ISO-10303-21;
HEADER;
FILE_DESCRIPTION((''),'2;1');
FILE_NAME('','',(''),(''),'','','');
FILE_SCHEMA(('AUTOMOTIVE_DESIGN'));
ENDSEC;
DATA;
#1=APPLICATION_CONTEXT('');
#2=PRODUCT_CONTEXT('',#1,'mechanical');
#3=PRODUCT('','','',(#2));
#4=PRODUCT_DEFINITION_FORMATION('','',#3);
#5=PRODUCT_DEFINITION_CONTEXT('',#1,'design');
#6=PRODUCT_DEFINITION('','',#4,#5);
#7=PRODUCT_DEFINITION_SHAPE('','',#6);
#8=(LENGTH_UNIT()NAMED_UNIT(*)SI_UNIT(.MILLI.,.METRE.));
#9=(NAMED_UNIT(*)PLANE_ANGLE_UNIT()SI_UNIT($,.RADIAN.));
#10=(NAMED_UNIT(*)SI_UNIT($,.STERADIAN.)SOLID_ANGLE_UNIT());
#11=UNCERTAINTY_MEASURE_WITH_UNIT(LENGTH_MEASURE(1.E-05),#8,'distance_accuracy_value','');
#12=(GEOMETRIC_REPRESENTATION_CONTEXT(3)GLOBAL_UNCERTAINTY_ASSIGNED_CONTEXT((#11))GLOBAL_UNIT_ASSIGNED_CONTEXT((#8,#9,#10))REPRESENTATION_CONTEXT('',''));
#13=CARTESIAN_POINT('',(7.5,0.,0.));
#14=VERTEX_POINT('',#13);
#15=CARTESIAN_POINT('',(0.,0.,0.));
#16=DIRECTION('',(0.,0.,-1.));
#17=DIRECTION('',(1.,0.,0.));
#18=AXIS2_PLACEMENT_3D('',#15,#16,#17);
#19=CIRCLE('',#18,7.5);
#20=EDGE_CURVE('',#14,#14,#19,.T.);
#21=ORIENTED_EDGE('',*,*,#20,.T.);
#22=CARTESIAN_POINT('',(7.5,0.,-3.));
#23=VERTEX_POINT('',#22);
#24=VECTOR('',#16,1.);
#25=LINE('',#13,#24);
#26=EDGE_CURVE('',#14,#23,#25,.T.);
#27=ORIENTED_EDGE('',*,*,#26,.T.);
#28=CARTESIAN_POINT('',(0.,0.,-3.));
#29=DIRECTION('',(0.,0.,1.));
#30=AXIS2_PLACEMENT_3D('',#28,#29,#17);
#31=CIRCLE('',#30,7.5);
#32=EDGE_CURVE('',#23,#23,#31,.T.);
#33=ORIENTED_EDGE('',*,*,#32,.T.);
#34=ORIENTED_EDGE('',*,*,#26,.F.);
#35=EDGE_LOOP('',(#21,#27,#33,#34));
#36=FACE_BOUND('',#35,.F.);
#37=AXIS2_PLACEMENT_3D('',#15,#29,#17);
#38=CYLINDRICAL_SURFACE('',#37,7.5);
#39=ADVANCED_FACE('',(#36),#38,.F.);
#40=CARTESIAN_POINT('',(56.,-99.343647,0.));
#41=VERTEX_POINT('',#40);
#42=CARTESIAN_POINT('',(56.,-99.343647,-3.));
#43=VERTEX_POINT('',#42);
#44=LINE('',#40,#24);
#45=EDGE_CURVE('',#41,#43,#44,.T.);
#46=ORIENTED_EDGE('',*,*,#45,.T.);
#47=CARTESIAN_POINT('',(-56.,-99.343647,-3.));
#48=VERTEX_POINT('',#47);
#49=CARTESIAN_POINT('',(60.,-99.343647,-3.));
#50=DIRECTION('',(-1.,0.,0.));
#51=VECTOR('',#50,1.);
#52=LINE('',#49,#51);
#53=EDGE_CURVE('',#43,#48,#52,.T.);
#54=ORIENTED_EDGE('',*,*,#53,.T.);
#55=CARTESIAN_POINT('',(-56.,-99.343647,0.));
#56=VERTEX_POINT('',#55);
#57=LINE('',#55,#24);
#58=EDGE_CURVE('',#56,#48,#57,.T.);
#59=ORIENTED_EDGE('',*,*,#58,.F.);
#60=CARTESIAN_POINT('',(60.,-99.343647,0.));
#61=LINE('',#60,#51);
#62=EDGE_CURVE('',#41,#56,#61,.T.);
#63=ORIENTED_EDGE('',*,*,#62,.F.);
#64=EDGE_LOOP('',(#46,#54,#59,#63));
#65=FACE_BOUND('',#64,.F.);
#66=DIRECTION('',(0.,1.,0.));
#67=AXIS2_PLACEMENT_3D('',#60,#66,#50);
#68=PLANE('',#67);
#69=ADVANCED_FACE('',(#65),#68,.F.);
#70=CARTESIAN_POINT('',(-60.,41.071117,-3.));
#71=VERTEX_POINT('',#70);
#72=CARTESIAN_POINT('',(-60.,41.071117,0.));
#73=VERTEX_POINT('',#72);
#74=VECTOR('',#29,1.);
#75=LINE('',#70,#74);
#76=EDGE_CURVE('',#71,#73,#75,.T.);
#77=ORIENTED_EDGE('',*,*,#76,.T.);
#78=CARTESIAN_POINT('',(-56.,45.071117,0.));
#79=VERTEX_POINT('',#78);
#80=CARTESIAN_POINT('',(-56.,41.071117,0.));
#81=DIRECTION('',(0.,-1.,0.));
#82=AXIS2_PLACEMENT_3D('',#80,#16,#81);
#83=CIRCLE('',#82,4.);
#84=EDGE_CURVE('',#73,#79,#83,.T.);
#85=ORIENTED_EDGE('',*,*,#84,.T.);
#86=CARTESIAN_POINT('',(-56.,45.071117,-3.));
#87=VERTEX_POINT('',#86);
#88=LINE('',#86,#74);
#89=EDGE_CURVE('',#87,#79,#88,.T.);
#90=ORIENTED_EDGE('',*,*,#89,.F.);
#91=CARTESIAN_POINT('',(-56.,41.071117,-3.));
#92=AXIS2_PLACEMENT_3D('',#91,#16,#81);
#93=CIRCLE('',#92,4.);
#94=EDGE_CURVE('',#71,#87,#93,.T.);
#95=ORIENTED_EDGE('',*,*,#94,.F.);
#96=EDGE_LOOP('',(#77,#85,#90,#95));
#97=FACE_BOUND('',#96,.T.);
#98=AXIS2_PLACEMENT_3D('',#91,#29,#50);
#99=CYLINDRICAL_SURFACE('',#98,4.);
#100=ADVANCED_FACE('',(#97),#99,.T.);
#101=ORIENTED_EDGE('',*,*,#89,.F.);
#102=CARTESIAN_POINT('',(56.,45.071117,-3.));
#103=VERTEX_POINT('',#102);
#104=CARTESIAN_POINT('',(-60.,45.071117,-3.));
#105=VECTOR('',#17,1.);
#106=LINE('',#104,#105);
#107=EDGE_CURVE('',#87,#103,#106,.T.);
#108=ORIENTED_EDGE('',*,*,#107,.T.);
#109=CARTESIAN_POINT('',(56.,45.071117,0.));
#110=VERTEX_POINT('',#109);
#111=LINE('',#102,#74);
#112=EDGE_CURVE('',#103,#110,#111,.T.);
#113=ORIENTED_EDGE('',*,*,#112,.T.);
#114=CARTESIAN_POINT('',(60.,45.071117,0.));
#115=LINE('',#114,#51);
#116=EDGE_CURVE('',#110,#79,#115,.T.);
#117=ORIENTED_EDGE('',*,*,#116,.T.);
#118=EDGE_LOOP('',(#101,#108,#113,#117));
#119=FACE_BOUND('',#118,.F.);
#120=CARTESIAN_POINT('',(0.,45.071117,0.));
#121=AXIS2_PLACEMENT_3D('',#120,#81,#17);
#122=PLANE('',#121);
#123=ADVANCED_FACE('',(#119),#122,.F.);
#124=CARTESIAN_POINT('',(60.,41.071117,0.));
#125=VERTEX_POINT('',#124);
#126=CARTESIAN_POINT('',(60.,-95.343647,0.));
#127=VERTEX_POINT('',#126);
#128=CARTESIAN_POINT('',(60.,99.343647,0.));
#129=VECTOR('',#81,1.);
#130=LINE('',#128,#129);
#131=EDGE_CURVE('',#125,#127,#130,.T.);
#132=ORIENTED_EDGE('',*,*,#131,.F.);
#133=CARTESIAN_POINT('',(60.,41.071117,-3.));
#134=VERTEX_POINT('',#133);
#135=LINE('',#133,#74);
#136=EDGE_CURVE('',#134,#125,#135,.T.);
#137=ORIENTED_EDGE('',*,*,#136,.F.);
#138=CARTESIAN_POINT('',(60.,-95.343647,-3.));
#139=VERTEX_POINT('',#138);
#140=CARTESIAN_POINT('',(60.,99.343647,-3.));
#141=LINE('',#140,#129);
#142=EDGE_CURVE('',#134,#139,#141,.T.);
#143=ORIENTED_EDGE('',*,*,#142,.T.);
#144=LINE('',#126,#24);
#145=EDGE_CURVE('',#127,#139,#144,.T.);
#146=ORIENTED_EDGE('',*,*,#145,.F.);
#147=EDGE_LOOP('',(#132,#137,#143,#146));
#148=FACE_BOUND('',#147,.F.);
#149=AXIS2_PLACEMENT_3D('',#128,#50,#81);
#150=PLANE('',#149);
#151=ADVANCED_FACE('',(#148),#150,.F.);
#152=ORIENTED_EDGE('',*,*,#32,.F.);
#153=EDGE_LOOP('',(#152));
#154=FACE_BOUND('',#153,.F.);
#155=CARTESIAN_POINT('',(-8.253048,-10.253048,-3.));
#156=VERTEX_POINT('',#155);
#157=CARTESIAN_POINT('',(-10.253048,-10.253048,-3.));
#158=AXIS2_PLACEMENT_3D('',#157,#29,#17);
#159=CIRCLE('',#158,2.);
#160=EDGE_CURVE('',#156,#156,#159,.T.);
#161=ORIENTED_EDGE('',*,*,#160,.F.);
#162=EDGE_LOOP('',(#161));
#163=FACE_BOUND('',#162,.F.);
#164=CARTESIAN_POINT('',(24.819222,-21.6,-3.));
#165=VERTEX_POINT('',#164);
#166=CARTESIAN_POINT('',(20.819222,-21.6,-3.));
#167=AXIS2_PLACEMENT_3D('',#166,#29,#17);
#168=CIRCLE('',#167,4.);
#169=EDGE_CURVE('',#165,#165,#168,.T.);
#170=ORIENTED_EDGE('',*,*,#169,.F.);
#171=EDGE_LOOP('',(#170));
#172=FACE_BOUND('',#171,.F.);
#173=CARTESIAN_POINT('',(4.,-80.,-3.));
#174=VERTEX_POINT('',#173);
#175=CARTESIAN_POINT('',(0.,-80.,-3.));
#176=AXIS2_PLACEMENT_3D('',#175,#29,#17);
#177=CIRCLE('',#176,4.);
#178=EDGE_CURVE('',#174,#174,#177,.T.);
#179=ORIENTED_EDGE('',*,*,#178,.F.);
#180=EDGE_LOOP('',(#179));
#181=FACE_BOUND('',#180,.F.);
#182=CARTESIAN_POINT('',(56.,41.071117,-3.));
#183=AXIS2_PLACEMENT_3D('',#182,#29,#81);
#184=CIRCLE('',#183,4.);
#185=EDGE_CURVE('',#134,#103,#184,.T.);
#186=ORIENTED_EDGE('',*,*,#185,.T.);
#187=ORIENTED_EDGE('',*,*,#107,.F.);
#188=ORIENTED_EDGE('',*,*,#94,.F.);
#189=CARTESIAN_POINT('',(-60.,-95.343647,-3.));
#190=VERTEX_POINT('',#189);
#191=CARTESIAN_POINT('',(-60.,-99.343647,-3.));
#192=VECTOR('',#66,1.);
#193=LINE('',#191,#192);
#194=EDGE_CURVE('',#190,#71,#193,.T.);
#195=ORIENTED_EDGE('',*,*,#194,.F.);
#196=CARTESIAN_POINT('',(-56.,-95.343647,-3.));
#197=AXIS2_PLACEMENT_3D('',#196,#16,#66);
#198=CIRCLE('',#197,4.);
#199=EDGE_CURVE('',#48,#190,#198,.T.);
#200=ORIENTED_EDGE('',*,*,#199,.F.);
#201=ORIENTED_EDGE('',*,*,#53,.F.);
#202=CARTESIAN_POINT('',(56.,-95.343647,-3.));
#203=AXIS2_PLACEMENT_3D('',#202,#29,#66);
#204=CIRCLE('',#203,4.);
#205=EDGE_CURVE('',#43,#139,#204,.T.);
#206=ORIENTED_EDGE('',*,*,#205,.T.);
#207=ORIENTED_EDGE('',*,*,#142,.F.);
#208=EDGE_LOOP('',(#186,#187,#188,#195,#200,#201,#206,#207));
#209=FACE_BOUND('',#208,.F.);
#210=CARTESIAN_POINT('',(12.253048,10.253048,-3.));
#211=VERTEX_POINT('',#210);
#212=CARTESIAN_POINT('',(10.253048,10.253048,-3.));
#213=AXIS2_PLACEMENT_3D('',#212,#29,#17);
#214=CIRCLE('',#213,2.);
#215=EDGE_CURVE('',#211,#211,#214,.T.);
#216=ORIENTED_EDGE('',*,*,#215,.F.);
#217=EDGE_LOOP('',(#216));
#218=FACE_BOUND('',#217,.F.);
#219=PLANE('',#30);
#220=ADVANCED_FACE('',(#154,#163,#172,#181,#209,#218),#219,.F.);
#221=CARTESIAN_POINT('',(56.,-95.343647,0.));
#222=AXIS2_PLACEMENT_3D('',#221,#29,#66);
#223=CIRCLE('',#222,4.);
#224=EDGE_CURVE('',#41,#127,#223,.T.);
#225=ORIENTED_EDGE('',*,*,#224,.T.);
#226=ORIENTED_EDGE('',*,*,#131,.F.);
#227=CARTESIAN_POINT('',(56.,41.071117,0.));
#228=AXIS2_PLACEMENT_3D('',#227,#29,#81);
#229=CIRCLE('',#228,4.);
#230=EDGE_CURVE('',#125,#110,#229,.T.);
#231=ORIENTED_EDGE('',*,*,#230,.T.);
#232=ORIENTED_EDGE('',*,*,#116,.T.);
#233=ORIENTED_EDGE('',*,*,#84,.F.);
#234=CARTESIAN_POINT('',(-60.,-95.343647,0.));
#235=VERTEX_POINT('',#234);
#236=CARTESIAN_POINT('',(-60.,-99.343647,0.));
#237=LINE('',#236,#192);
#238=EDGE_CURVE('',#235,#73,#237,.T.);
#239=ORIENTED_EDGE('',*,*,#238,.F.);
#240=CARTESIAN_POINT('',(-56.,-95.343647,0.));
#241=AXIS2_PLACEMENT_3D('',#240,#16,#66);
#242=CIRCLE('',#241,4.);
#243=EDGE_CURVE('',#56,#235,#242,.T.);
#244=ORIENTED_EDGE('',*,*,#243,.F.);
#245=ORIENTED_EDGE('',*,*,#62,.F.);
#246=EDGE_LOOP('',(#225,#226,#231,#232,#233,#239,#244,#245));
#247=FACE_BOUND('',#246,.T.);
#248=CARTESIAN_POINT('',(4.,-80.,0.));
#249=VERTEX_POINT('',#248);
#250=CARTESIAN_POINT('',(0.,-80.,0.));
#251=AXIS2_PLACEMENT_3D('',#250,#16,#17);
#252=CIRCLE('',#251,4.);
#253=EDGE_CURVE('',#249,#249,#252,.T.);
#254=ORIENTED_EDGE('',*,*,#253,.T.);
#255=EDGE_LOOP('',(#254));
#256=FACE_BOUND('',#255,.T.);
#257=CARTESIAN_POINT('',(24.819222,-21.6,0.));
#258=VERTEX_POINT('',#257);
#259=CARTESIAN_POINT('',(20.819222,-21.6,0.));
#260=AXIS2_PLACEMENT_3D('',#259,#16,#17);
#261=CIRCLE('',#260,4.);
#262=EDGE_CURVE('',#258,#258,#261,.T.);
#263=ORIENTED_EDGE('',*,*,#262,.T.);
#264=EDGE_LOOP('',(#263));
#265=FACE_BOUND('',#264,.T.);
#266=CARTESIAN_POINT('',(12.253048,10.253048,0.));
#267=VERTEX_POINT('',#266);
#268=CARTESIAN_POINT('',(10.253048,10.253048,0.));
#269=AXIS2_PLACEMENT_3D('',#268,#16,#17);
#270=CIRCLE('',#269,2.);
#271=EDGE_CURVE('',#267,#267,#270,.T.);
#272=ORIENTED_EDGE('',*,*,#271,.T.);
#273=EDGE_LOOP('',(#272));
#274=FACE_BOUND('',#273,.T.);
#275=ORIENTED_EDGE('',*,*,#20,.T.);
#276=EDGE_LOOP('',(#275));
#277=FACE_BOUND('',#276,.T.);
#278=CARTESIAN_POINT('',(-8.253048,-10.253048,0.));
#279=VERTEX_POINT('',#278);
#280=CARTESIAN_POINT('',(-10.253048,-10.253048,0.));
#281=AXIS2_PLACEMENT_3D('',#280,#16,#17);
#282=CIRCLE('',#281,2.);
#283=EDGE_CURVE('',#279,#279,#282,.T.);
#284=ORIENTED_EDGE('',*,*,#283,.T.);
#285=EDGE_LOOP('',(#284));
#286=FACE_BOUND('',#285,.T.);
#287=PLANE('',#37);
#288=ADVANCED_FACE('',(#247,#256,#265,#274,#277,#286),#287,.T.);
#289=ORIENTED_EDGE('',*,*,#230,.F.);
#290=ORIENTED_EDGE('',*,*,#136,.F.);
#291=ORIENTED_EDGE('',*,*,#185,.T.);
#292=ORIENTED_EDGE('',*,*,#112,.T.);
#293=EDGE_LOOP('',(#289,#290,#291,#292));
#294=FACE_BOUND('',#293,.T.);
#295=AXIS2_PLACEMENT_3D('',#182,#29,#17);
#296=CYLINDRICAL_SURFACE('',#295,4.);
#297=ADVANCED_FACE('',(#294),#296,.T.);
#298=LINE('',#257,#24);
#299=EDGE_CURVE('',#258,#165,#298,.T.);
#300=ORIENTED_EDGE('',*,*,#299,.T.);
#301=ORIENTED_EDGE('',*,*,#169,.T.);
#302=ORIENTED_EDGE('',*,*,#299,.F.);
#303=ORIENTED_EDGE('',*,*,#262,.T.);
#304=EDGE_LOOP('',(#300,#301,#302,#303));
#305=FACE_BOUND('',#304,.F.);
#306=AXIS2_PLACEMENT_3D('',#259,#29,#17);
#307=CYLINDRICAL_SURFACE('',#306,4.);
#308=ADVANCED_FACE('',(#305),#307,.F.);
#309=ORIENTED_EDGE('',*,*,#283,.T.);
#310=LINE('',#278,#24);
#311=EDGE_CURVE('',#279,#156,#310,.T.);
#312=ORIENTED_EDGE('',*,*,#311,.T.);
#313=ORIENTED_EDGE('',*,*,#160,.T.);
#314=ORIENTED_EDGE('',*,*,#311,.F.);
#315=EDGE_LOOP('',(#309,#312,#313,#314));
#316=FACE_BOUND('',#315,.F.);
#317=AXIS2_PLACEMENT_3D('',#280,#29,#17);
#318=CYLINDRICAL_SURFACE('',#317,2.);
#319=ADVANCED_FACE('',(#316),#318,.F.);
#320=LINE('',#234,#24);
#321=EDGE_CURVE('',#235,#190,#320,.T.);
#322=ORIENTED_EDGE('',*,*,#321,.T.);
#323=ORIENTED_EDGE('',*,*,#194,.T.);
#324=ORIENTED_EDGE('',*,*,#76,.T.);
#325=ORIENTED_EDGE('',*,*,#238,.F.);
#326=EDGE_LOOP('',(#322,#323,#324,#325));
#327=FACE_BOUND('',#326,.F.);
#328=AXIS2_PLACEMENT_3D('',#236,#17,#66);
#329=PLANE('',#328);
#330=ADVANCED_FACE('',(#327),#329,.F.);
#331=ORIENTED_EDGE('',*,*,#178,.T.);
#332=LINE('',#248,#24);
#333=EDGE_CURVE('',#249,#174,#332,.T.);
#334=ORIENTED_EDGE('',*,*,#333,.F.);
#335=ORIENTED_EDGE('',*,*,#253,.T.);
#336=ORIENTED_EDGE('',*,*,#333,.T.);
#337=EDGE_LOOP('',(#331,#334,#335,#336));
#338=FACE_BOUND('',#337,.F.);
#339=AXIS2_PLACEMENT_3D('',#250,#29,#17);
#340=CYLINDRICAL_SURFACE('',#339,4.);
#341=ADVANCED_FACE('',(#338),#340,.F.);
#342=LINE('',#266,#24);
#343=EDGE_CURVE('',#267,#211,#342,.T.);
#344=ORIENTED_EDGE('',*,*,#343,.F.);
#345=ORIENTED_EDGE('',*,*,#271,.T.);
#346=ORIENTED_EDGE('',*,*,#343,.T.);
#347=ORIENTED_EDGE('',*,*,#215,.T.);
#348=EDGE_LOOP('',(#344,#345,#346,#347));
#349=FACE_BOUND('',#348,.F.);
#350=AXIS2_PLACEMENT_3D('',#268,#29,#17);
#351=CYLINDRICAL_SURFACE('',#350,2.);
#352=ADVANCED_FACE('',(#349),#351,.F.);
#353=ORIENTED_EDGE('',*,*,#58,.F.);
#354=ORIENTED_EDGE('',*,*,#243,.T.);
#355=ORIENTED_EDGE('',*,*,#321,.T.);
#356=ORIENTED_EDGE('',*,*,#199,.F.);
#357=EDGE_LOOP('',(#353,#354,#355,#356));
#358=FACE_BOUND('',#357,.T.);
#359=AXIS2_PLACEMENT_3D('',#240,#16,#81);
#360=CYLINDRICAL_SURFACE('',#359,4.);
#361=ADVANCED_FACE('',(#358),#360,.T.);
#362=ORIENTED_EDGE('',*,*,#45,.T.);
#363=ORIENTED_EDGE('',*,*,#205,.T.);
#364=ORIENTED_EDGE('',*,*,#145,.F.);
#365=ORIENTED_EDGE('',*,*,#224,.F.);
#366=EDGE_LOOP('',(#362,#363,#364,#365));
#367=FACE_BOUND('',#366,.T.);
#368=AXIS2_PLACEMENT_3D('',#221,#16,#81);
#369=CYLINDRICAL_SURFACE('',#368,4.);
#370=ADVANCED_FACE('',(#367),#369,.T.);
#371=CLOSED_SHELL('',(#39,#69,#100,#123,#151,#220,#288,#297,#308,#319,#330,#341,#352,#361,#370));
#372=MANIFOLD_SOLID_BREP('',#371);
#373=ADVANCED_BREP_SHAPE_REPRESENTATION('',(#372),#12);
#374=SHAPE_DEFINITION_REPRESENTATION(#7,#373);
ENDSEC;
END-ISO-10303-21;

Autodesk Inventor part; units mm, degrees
ref_plane "YZ Plane" through (0, 0, 0) normal (1, 0, 0) x (0, 1, 0)
ref_plane "XZ Plane" through (0, 0, 0) normal (0, 1, 0) x (-1, 0, 0)
ref_plane "XY Plane" through (0, 0, 0) normal (0, 0, 1) x (1, 0, 0)
sketch "スケッチ1" plane through (0, 0, 0) normal (0, 0, 1) x (1, 0, 0)
  circle A0 centre (0, 0) radius 21.2
  circle A1 centre (0, 0) radius 7.5
  circle A2 centre (0, 0) radius 30
  circle A3 centre (20.819222, -21.6) radius 22.5
  circle A4 centre (20.819222, -21.6) radius 14
  circle A5 centre (20.819222, -21.6) radius 62
  circle A6 centre (0, -80) radius 48
  circle A7 centre (0, -80) radius 50
  circle A8 centre (20.819222, -21.6) radius 4
  circle A9 centre (0, -80) radius 4
  dimension "d2" = 60
  dimension "d4" = 124
  dimension "d0" = 42.4
  dimension "d1" = 15
  dimension "d3" = 28
  dimension "d5" = 100
  dimension "d23" = 8
  dimension "d41" = 8
sketch "スケッチ2" plane through (0, 0, 0) normal (0, 0, 1) x (1, 0, 0)
  line L0 (0, 0) -> (24.501973, 0) construction
  line L1 (0, 0) -> (12.5, 0) construction
  line L2 (0, 0) -> (10.253048, 10.253048)
  line L3 (0, 0) -> (14.5, 0) construction
  line L4 (10.253048, 10.253048) -> (-10.253048, -10.253048)
  circle A0 centre (10.253048, 10.253048) radius 2
  circle A1 centre (-10.253048, -10.253048) radius 2
  circle A2 centre (0, 0) radius 7.5
  line L5 (0, 0) -> (28.190779, 10.260604)
  line L6 (0, 0) -> (30, 0) construction
  line L7 (0, 0) -> (-28.190779, 10.260604)
  line L8 (0, 0) -> (30, 0) construction
  circle A3 centre (-28.190779, 10.260604) radius 2.5
  line L9 (0, 0) -> (0, 30)
  circle A4 centre (0, 30) radius 2.5
  circle A5 centre (28.190779, 10.260604) radius 2.5
  dimension "d9" = 14.5
  dimension "d10" = 45
  dimension "d11" = 29
  dimension "d12" = 4
  dimension "d13" = 4
  dimension "d14" = 15
  dimension "d15" = 30
  dimension "d16" = 20
  dimension "d17" = 30
  dimension "d18" = 160
  dimension "d19" = 5
  dimension "d20" = 30
  dimension "d21" = 5
  dimension "d22" = 5
sketch "スケッチ3" plane through (0, 0, 0) normal (0, 0, 1) x (1, 0, 0)
  line L0 (60, -99.343647) -> (-60, -99.343647)
  line L1 (-60, -99.343647) -> (-60, 99.343647)
  line L2 (-60, 99.343647) -> (60, 99.343647)
  line L3 (60, 99.343647) -> (60, -99.343647)
  line L4 (60, -99.343647) -> (-60, 99.343647) construction
  line L5 (-60, -99.343647) -> (60, 99.343647) construction
  point P0 (0, 0)
  dimension "d25" = 120
extrude "押し出し1" add sketch "スケッチ3" against normal blind 3
sketch "スケッチ4" plane through (0, 0, 0) normal (0, 0, 1) x (1, 0, 0)
  line L0 (0, 45.071117) -> (68.359536, 45.071117)
  line L1 (68.359536, 45.071117) -> (-74.382402, 45.071117)
  line L2 (-74.382402, 45.071117) -> (108.165644, 45.071117)
  line L3 (108.165644, 45.071117) -> (108.165644, 129.415375)
  line L4 (108.165644, 129.415375) -> (-74.382402, 129.415375)
  line L5 (-74.382402, 129.415375) -> (-74.382402, 45.071117)
  point P0 (0, 0)
extrude "押し出し4" cut sketch "スケッチ4" against normal blind 10
fillet "フィレット1" radius 4 4 edges at (-60, 45.0711, -1.5) (60, 45.0711, -1.5) (-60, -99.3436, -1.5) (60, -99.3436, -1.5)
extrude "押し出し7" cut sketch "スケッチ1" against normal blind 10 contours A8 A2 | A2 A8 | A9 A5 | A5 A9
extrude "押し出し9" cut sketch "スケッチ2" against normal blind 4 contours L9 A2 L2 | L5 A2 L4 | L2 A2 L5 | L4 A2 L7 | L7 A2 L9 | A0 | A1
equation "\"d46\" = d12"
properties part number "板"
